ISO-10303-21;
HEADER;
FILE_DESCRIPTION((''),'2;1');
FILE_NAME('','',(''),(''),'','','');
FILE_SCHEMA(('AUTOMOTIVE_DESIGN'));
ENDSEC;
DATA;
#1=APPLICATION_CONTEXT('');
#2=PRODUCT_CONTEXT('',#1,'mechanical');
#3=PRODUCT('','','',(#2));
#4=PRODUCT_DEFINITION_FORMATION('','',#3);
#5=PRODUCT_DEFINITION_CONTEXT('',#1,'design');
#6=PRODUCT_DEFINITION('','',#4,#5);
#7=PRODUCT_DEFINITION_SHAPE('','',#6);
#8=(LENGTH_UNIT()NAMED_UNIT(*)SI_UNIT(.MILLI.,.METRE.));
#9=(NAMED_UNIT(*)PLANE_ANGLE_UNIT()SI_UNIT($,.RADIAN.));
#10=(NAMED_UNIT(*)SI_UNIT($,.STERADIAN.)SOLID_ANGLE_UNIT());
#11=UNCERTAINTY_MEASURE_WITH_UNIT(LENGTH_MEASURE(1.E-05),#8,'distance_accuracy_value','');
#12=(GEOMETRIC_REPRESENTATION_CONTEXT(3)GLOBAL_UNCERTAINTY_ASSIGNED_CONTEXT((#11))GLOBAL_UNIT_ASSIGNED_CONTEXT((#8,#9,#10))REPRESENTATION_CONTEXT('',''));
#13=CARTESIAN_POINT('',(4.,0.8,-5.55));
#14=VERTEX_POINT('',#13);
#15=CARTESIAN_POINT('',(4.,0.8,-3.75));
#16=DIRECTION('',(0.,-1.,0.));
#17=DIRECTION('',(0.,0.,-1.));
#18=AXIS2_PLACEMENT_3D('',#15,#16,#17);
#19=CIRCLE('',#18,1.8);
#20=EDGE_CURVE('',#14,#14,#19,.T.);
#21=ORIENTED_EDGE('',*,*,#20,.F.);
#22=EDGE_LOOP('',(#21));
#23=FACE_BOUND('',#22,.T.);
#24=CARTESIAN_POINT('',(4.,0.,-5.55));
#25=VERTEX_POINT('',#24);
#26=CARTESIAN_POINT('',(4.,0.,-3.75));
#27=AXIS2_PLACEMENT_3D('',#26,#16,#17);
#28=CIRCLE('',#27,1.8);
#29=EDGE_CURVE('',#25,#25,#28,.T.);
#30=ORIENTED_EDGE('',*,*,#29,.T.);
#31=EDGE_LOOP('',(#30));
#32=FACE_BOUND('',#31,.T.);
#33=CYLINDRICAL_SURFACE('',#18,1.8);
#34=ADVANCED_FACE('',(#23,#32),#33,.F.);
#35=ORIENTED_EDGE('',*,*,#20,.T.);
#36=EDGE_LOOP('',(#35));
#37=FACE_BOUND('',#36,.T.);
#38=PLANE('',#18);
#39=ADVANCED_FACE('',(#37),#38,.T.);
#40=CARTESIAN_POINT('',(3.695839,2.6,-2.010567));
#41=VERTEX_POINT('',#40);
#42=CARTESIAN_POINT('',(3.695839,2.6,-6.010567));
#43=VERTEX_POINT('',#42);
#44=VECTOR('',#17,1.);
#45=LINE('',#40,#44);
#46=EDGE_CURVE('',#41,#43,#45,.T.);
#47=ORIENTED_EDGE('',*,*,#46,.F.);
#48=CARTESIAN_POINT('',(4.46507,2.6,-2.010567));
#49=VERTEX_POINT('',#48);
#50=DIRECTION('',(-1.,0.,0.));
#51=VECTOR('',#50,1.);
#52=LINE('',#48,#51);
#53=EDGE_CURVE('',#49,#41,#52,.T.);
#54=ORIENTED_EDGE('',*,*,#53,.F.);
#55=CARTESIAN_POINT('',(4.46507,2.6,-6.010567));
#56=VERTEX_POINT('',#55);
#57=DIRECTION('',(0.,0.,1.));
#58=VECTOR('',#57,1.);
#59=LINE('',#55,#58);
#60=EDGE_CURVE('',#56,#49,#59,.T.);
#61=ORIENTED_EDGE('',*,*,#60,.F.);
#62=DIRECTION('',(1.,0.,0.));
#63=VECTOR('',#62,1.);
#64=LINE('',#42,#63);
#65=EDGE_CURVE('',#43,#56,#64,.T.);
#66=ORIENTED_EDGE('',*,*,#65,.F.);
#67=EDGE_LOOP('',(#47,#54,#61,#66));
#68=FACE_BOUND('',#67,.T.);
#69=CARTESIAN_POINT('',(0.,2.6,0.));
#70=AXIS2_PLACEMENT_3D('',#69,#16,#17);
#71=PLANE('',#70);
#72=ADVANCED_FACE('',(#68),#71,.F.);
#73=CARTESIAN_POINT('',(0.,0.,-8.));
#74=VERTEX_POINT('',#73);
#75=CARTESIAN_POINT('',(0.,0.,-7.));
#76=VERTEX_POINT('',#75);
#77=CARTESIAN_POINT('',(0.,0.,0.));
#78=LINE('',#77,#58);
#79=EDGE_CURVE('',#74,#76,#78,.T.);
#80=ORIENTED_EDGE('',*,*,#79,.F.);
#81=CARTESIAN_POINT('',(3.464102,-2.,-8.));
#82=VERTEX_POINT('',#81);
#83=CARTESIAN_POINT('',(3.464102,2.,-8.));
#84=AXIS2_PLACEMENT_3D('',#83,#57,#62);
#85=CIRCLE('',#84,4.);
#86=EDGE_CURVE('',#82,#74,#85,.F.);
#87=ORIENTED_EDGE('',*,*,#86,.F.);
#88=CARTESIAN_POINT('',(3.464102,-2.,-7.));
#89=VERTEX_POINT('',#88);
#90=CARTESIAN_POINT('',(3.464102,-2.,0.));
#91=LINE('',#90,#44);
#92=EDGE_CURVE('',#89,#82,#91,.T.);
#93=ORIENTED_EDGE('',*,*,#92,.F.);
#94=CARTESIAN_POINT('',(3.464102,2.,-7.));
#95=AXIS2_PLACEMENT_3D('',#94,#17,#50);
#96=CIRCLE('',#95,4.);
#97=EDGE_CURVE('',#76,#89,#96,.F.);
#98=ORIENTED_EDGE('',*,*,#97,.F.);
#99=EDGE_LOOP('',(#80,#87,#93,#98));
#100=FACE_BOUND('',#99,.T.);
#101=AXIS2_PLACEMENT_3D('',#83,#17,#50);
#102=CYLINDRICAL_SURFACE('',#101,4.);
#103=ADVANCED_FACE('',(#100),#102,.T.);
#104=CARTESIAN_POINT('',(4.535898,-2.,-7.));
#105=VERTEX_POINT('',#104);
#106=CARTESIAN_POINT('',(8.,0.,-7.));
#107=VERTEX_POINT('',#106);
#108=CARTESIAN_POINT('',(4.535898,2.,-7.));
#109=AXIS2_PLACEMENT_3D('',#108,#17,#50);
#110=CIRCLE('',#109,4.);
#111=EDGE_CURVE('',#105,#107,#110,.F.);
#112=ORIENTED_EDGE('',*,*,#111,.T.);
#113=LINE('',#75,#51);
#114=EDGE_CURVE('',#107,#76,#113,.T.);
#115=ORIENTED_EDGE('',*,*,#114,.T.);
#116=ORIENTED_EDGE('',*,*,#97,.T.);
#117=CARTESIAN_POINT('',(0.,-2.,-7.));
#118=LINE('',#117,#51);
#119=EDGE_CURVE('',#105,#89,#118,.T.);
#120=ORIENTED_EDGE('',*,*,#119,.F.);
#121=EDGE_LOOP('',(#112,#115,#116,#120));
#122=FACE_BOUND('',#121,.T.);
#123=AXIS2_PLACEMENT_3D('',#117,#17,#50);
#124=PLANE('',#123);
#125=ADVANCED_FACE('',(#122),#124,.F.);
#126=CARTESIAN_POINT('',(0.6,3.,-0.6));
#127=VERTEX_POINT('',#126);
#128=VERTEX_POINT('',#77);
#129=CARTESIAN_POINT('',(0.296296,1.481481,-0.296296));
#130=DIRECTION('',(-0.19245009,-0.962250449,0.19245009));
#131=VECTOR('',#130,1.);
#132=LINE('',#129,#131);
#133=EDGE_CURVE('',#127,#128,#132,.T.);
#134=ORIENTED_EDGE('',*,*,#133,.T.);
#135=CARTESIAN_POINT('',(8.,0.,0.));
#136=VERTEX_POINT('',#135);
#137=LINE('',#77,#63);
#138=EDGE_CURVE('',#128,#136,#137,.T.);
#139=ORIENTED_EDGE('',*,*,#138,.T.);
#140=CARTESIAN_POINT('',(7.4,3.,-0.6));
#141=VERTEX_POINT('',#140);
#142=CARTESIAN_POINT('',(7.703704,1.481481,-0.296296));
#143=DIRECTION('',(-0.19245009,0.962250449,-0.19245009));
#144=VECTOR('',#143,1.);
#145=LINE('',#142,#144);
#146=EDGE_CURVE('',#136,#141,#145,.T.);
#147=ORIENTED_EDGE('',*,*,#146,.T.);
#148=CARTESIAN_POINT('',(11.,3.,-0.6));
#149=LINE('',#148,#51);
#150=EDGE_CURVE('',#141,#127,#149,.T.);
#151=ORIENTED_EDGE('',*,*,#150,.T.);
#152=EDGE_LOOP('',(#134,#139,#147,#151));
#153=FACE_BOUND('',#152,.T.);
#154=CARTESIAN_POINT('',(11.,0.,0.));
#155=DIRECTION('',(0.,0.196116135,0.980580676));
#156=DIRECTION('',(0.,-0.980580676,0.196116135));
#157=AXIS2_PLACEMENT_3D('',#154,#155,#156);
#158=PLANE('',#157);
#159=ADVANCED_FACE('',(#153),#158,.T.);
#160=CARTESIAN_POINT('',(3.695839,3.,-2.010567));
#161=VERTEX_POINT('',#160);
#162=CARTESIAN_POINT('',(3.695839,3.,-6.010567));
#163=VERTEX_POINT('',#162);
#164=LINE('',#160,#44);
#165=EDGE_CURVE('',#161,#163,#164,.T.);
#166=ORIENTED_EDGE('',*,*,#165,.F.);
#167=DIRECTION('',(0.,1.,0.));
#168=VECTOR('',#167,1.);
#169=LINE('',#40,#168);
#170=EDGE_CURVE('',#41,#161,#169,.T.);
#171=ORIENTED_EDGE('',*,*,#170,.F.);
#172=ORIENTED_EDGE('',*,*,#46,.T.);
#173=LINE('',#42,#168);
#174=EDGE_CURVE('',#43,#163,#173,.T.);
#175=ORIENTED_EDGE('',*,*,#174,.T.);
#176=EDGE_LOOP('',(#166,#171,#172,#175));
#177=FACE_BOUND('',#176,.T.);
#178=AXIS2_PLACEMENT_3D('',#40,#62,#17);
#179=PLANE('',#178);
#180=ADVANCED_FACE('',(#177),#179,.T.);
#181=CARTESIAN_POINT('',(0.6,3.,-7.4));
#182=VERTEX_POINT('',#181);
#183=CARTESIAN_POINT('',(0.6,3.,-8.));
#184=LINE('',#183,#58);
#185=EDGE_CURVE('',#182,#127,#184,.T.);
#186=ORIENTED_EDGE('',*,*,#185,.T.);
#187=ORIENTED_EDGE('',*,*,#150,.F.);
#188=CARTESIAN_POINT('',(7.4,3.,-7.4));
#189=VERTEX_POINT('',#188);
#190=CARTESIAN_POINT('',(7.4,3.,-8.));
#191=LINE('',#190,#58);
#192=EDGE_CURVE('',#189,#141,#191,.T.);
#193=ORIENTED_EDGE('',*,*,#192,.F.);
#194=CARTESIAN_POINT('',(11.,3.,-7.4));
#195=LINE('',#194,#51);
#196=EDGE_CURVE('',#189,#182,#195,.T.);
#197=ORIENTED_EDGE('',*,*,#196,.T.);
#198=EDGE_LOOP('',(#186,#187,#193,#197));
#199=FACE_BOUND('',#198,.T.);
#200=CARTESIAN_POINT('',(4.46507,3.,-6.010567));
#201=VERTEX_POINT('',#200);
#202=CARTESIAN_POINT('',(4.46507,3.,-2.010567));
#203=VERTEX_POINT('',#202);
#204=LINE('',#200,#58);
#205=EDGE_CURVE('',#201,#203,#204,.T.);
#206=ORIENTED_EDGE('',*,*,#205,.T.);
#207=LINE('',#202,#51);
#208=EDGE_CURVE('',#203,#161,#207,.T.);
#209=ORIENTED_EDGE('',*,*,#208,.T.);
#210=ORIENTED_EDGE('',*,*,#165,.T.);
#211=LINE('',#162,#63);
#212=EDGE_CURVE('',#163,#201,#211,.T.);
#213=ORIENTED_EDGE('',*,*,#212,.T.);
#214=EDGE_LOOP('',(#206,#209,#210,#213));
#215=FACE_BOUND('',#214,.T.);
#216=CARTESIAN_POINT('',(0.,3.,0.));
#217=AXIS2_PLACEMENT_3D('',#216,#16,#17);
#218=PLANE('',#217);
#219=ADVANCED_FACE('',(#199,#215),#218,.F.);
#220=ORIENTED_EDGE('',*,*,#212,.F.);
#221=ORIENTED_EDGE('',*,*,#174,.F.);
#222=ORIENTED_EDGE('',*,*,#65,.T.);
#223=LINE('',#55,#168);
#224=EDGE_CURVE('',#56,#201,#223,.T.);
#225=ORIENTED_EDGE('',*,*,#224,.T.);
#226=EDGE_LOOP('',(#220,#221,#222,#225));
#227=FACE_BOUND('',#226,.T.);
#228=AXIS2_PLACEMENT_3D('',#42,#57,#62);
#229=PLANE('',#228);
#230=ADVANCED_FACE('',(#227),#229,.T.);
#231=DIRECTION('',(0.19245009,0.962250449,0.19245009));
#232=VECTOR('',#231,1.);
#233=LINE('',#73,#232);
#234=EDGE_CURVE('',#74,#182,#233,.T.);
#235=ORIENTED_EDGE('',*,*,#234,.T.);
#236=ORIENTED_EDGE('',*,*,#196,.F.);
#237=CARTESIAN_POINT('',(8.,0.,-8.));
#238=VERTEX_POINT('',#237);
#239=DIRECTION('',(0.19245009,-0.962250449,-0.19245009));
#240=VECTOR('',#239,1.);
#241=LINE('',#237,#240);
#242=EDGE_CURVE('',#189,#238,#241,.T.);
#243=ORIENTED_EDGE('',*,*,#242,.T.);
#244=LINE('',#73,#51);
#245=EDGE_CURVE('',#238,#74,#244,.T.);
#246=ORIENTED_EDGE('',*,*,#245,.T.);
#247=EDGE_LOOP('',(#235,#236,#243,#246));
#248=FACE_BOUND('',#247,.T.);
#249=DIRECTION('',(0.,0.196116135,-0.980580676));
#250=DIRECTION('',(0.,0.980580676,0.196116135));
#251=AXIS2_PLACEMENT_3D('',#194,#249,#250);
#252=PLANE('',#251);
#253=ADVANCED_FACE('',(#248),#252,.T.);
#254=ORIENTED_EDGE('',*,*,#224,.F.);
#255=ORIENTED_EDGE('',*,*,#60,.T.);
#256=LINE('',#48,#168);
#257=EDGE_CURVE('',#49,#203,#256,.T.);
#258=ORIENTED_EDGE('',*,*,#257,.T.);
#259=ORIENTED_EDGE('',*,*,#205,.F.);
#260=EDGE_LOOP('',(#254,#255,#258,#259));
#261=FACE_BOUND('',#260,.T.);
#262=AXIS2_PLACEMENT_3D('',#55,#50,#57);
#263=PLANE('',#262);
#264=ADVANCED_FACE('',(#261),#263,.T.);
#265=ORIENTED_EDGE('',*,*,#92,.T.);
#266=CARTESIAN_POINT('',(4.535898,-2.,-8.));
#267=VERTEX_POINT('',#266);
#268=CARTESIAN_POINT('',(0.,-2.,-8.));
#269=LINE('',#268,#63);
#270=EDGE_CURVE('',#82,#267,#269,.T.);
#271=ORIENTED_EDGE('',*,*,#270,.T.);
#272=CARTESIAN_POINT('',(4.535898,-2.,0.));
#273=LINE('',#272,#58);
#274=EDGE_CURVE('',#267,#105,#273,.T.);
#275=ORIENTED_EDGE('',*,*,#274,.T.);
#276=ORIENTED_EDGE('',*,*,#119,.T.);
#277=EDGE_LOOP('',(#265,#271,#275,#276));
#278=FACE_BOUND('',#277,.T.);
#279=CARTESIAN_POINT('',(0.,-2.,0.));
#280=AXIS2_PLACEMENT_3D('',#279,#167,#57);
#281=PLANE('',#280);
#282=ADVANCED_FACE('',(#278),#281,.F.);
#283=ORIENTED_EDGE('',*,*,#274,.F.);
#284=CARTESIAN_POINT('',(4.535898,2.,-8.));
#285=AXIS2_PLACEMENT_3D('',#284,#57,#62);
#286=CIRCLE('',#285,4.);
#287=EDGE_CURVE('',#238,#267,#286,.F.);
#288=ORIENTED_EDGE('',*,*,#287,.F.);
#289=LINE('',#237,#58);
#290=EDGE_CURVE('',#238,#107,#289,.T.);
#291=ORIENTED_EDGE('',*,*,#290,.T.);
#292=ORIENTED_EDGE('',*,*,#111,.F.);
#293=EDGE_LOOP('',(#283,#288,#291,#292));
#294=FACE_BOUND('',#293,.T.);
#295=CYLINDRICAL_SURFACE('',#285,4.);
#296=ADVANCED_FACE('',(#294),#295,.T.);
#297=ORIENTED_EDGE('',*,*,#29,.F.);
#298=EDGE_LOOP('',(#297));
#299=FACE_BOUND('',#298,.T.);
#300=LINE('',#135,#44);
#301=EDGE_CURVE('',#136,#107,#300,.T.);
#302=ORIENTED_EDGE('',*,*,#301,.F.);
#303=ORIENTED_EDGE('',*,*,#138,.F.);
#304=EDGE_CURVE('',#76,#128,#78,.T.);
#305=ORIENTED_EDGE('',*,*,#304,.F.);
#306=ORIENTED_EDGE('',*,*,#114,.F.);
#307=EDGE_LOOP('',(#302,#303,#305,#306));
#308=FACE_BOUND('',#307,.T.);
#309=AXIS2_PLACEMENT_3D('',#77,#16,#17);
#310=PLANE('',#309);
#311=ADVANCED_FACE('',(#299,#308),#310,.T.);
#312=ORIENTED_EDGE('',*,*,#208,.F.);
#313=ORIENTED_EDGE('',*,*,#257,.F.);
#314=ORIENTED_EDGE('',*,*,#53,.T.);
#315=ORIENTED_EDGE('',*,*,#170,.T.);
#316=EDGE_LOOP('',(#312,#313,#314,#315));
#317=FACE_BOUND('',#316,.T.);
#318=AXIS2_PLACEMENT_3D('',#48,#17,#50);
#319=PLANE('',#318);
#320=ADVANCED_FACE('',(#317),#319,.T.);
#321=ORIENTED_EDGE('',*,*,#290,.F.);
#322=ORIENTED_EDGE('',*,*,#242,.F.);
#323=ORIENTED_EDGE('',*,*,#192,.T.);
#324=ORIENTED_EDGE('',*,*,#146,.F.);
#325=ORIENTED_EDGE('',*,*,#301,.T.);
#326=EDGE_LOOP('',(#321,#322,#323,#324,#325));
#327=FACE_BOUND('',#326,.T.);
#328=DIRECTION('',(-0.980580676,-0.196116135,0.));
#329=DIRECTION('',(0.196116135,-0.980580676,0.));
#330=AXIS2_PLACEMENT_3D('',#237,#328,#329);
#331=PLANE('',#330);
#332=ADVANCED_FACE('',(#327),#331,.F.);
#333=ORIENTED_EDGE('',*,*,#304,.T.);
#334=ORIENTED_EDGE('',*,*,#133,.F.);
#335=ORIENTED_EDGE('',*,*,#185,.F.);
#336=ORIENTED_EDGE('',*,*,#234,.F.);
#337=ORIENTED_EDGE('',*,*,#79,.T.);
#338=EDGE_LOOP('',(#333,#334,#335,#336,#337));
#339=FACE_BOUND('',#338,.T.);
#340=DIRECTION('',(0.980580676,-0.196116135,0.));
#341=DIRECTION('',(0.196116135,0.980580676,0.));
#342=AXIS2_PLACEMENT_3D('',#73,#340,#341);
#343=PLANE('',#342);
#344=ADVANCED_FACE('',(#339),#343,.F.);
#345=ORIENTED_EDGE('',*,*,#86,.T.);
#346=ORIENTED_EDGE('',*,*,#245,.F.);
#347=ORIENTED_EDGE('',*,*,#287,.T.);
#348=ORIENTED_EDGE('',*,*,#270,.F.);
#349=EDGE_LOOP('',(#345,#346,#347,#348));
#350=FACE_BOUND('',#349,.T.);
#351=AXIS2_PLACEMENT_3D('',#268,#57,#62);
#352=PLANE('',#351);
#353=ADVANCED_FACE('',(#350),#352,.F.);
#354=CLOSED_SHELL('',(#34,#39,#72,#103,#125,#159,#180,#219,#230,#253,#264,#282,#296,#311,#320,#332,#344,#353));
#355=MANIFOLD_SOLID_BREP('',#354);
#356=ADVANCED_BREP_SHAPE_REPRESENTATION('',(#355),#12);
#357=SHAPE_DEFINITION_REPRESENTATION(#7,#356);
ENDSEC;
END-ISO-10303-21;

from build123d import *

# Parameters (mm, degrees)
SKETCH1_W               = 8
SKETCH1_H               = 8
BOSS_EXTRUDE1_DEPTH     = 3
CUT_EXTRUDE1_DEPTH      = 12.704699911
CUT_EXTRUDE1_DEPTH_BACK = 12.704699911
CUT_EXTRUDE2_DEPTH      = 11
SKETCH4_R               = 1.8
CUT_EXTRUDE3_DEPTH      = 0.8
SKETCH5_W               = 8
SKETCH5_H               = 1
BOSS_EXTRUDE2_DEPTH     = 2
FILLET1_R               = 4
SKETCH6_W               = 0.769230769
SKETCH6_H               = 4
CUT_EXTRUDE4_DEPTH      = 0.4


with BuildPart() as part:
    # Sketch1 → Boss-Extrude1 (new body)
    with BuildSketch(Plane(origin=(0, 0, 0), x_dir=(1, 0, 0), z_dir=(0, 1, 0))):
        with Locations((4, 4)):
            Rectangle(SKETCH1_W, SKETCH1_H)
    extrude(amount=BOSS_EXTRUDE1_DEPTH)

    # Sketch2 → Cut-Extrude1 (cut, two sides: drawn at the far end of the back side and taken through both)
    with BuildSketch(Plane.XY.offset(-CUT_EXTRUDE1_DEPTH_BACK)):
        Polygon((0, 0), (0.6, 3), (0, 3), align=None)
        Polygon((8, 0), (7.4, 3), (8, 3), align=None)
    extrude(amount=CUT_EXTRUDE1_DEPTH + CUT_EXTRUDE1_DEPTH_BACK, mode=Mode.SUBTRACT)

    # Sketch3 → Cut-Extrude2 (cut)
    with BuildSketch(Plane(origin=(0, 0, 0), x_dir=(0, 0, -1), z_dir=(1, 0, 0))):
        Polygon((0, 0), (0.6, 3), (0, 3), align=None)
        Polygon((8, 3), (7.4, 3), (8, 0), align=None)
    extrude(amount=CUT_EXTRUDE2_DEPTH, mode=Mode.SUBTRACT)

    # Sketch4 → Cut-Extrude3 (cut)
    with BuildSketch(Plane.XZ):
        with Locations(Location((4, -3.75, 0), (0, 0, 270))):
            Circle(SKETCH4_R)
    extrude(amount=-CUT_EXTRUDE3_DEPTH, mode=Mode.SUBTRACT)

    # Sketch5 → Boss-Extrude2 (add)
    with BuildSketch(Plane.XZ):
        with Locations((4, -7.5)):
            Rectangle(SKETCH5_W, SKETCH5_H)
    extrude(amount=BOSS_EXTRUDE2_DEPTH)

    # Fillet1
    # the kernel refuses this fillet: 4 mm, written as the material it takes off along each edge
    with BuildSketch(Plane(origin=(8, -2, -16.660254038), x_dir=(0, 1, 0), z_dir=(0, 0, 1)), Plane(origin=(0, -2, 1.660254038), x_dir=(0, 1, 0), z_dir=(0, 0, -1))) as fillet1_piece_1:
        with BuildLine():
            CenterArc((4, 3.464101615), FILLET1_R, 180, 60)
            Line((0, 3.464101615), (-0.08, 3.464101615))
            Line((-0.08, 3.464101615), (-0.08, 0))
            Line((-0.08, 0), (0, -0.08))
            ThreePointArc((0, -0.08), (1, -0.08), (1.96, -0.069282032))
            Line((1.96, -0.069282032), (2, 0))
        make_face()
    extrude(amount=18.320508076, mode=Mode.SUBTRACT)

    # Sketch6 → Cut-Extrude4 (cut)
    with BuildSketch(Plane(origin=(0, 3, 0), x_dir=(1, 0, 0), z_dir=(0, 1, 0))):
        with Locations((4.080454652, 4.010567225)):
            Rectangle(SKETCH6_W, SKETCH6_H)
    extrude(amount=-CUT_EXTRUDE4_DEPTH, mode=Mode.SUBTRACT)


solid = part.part
